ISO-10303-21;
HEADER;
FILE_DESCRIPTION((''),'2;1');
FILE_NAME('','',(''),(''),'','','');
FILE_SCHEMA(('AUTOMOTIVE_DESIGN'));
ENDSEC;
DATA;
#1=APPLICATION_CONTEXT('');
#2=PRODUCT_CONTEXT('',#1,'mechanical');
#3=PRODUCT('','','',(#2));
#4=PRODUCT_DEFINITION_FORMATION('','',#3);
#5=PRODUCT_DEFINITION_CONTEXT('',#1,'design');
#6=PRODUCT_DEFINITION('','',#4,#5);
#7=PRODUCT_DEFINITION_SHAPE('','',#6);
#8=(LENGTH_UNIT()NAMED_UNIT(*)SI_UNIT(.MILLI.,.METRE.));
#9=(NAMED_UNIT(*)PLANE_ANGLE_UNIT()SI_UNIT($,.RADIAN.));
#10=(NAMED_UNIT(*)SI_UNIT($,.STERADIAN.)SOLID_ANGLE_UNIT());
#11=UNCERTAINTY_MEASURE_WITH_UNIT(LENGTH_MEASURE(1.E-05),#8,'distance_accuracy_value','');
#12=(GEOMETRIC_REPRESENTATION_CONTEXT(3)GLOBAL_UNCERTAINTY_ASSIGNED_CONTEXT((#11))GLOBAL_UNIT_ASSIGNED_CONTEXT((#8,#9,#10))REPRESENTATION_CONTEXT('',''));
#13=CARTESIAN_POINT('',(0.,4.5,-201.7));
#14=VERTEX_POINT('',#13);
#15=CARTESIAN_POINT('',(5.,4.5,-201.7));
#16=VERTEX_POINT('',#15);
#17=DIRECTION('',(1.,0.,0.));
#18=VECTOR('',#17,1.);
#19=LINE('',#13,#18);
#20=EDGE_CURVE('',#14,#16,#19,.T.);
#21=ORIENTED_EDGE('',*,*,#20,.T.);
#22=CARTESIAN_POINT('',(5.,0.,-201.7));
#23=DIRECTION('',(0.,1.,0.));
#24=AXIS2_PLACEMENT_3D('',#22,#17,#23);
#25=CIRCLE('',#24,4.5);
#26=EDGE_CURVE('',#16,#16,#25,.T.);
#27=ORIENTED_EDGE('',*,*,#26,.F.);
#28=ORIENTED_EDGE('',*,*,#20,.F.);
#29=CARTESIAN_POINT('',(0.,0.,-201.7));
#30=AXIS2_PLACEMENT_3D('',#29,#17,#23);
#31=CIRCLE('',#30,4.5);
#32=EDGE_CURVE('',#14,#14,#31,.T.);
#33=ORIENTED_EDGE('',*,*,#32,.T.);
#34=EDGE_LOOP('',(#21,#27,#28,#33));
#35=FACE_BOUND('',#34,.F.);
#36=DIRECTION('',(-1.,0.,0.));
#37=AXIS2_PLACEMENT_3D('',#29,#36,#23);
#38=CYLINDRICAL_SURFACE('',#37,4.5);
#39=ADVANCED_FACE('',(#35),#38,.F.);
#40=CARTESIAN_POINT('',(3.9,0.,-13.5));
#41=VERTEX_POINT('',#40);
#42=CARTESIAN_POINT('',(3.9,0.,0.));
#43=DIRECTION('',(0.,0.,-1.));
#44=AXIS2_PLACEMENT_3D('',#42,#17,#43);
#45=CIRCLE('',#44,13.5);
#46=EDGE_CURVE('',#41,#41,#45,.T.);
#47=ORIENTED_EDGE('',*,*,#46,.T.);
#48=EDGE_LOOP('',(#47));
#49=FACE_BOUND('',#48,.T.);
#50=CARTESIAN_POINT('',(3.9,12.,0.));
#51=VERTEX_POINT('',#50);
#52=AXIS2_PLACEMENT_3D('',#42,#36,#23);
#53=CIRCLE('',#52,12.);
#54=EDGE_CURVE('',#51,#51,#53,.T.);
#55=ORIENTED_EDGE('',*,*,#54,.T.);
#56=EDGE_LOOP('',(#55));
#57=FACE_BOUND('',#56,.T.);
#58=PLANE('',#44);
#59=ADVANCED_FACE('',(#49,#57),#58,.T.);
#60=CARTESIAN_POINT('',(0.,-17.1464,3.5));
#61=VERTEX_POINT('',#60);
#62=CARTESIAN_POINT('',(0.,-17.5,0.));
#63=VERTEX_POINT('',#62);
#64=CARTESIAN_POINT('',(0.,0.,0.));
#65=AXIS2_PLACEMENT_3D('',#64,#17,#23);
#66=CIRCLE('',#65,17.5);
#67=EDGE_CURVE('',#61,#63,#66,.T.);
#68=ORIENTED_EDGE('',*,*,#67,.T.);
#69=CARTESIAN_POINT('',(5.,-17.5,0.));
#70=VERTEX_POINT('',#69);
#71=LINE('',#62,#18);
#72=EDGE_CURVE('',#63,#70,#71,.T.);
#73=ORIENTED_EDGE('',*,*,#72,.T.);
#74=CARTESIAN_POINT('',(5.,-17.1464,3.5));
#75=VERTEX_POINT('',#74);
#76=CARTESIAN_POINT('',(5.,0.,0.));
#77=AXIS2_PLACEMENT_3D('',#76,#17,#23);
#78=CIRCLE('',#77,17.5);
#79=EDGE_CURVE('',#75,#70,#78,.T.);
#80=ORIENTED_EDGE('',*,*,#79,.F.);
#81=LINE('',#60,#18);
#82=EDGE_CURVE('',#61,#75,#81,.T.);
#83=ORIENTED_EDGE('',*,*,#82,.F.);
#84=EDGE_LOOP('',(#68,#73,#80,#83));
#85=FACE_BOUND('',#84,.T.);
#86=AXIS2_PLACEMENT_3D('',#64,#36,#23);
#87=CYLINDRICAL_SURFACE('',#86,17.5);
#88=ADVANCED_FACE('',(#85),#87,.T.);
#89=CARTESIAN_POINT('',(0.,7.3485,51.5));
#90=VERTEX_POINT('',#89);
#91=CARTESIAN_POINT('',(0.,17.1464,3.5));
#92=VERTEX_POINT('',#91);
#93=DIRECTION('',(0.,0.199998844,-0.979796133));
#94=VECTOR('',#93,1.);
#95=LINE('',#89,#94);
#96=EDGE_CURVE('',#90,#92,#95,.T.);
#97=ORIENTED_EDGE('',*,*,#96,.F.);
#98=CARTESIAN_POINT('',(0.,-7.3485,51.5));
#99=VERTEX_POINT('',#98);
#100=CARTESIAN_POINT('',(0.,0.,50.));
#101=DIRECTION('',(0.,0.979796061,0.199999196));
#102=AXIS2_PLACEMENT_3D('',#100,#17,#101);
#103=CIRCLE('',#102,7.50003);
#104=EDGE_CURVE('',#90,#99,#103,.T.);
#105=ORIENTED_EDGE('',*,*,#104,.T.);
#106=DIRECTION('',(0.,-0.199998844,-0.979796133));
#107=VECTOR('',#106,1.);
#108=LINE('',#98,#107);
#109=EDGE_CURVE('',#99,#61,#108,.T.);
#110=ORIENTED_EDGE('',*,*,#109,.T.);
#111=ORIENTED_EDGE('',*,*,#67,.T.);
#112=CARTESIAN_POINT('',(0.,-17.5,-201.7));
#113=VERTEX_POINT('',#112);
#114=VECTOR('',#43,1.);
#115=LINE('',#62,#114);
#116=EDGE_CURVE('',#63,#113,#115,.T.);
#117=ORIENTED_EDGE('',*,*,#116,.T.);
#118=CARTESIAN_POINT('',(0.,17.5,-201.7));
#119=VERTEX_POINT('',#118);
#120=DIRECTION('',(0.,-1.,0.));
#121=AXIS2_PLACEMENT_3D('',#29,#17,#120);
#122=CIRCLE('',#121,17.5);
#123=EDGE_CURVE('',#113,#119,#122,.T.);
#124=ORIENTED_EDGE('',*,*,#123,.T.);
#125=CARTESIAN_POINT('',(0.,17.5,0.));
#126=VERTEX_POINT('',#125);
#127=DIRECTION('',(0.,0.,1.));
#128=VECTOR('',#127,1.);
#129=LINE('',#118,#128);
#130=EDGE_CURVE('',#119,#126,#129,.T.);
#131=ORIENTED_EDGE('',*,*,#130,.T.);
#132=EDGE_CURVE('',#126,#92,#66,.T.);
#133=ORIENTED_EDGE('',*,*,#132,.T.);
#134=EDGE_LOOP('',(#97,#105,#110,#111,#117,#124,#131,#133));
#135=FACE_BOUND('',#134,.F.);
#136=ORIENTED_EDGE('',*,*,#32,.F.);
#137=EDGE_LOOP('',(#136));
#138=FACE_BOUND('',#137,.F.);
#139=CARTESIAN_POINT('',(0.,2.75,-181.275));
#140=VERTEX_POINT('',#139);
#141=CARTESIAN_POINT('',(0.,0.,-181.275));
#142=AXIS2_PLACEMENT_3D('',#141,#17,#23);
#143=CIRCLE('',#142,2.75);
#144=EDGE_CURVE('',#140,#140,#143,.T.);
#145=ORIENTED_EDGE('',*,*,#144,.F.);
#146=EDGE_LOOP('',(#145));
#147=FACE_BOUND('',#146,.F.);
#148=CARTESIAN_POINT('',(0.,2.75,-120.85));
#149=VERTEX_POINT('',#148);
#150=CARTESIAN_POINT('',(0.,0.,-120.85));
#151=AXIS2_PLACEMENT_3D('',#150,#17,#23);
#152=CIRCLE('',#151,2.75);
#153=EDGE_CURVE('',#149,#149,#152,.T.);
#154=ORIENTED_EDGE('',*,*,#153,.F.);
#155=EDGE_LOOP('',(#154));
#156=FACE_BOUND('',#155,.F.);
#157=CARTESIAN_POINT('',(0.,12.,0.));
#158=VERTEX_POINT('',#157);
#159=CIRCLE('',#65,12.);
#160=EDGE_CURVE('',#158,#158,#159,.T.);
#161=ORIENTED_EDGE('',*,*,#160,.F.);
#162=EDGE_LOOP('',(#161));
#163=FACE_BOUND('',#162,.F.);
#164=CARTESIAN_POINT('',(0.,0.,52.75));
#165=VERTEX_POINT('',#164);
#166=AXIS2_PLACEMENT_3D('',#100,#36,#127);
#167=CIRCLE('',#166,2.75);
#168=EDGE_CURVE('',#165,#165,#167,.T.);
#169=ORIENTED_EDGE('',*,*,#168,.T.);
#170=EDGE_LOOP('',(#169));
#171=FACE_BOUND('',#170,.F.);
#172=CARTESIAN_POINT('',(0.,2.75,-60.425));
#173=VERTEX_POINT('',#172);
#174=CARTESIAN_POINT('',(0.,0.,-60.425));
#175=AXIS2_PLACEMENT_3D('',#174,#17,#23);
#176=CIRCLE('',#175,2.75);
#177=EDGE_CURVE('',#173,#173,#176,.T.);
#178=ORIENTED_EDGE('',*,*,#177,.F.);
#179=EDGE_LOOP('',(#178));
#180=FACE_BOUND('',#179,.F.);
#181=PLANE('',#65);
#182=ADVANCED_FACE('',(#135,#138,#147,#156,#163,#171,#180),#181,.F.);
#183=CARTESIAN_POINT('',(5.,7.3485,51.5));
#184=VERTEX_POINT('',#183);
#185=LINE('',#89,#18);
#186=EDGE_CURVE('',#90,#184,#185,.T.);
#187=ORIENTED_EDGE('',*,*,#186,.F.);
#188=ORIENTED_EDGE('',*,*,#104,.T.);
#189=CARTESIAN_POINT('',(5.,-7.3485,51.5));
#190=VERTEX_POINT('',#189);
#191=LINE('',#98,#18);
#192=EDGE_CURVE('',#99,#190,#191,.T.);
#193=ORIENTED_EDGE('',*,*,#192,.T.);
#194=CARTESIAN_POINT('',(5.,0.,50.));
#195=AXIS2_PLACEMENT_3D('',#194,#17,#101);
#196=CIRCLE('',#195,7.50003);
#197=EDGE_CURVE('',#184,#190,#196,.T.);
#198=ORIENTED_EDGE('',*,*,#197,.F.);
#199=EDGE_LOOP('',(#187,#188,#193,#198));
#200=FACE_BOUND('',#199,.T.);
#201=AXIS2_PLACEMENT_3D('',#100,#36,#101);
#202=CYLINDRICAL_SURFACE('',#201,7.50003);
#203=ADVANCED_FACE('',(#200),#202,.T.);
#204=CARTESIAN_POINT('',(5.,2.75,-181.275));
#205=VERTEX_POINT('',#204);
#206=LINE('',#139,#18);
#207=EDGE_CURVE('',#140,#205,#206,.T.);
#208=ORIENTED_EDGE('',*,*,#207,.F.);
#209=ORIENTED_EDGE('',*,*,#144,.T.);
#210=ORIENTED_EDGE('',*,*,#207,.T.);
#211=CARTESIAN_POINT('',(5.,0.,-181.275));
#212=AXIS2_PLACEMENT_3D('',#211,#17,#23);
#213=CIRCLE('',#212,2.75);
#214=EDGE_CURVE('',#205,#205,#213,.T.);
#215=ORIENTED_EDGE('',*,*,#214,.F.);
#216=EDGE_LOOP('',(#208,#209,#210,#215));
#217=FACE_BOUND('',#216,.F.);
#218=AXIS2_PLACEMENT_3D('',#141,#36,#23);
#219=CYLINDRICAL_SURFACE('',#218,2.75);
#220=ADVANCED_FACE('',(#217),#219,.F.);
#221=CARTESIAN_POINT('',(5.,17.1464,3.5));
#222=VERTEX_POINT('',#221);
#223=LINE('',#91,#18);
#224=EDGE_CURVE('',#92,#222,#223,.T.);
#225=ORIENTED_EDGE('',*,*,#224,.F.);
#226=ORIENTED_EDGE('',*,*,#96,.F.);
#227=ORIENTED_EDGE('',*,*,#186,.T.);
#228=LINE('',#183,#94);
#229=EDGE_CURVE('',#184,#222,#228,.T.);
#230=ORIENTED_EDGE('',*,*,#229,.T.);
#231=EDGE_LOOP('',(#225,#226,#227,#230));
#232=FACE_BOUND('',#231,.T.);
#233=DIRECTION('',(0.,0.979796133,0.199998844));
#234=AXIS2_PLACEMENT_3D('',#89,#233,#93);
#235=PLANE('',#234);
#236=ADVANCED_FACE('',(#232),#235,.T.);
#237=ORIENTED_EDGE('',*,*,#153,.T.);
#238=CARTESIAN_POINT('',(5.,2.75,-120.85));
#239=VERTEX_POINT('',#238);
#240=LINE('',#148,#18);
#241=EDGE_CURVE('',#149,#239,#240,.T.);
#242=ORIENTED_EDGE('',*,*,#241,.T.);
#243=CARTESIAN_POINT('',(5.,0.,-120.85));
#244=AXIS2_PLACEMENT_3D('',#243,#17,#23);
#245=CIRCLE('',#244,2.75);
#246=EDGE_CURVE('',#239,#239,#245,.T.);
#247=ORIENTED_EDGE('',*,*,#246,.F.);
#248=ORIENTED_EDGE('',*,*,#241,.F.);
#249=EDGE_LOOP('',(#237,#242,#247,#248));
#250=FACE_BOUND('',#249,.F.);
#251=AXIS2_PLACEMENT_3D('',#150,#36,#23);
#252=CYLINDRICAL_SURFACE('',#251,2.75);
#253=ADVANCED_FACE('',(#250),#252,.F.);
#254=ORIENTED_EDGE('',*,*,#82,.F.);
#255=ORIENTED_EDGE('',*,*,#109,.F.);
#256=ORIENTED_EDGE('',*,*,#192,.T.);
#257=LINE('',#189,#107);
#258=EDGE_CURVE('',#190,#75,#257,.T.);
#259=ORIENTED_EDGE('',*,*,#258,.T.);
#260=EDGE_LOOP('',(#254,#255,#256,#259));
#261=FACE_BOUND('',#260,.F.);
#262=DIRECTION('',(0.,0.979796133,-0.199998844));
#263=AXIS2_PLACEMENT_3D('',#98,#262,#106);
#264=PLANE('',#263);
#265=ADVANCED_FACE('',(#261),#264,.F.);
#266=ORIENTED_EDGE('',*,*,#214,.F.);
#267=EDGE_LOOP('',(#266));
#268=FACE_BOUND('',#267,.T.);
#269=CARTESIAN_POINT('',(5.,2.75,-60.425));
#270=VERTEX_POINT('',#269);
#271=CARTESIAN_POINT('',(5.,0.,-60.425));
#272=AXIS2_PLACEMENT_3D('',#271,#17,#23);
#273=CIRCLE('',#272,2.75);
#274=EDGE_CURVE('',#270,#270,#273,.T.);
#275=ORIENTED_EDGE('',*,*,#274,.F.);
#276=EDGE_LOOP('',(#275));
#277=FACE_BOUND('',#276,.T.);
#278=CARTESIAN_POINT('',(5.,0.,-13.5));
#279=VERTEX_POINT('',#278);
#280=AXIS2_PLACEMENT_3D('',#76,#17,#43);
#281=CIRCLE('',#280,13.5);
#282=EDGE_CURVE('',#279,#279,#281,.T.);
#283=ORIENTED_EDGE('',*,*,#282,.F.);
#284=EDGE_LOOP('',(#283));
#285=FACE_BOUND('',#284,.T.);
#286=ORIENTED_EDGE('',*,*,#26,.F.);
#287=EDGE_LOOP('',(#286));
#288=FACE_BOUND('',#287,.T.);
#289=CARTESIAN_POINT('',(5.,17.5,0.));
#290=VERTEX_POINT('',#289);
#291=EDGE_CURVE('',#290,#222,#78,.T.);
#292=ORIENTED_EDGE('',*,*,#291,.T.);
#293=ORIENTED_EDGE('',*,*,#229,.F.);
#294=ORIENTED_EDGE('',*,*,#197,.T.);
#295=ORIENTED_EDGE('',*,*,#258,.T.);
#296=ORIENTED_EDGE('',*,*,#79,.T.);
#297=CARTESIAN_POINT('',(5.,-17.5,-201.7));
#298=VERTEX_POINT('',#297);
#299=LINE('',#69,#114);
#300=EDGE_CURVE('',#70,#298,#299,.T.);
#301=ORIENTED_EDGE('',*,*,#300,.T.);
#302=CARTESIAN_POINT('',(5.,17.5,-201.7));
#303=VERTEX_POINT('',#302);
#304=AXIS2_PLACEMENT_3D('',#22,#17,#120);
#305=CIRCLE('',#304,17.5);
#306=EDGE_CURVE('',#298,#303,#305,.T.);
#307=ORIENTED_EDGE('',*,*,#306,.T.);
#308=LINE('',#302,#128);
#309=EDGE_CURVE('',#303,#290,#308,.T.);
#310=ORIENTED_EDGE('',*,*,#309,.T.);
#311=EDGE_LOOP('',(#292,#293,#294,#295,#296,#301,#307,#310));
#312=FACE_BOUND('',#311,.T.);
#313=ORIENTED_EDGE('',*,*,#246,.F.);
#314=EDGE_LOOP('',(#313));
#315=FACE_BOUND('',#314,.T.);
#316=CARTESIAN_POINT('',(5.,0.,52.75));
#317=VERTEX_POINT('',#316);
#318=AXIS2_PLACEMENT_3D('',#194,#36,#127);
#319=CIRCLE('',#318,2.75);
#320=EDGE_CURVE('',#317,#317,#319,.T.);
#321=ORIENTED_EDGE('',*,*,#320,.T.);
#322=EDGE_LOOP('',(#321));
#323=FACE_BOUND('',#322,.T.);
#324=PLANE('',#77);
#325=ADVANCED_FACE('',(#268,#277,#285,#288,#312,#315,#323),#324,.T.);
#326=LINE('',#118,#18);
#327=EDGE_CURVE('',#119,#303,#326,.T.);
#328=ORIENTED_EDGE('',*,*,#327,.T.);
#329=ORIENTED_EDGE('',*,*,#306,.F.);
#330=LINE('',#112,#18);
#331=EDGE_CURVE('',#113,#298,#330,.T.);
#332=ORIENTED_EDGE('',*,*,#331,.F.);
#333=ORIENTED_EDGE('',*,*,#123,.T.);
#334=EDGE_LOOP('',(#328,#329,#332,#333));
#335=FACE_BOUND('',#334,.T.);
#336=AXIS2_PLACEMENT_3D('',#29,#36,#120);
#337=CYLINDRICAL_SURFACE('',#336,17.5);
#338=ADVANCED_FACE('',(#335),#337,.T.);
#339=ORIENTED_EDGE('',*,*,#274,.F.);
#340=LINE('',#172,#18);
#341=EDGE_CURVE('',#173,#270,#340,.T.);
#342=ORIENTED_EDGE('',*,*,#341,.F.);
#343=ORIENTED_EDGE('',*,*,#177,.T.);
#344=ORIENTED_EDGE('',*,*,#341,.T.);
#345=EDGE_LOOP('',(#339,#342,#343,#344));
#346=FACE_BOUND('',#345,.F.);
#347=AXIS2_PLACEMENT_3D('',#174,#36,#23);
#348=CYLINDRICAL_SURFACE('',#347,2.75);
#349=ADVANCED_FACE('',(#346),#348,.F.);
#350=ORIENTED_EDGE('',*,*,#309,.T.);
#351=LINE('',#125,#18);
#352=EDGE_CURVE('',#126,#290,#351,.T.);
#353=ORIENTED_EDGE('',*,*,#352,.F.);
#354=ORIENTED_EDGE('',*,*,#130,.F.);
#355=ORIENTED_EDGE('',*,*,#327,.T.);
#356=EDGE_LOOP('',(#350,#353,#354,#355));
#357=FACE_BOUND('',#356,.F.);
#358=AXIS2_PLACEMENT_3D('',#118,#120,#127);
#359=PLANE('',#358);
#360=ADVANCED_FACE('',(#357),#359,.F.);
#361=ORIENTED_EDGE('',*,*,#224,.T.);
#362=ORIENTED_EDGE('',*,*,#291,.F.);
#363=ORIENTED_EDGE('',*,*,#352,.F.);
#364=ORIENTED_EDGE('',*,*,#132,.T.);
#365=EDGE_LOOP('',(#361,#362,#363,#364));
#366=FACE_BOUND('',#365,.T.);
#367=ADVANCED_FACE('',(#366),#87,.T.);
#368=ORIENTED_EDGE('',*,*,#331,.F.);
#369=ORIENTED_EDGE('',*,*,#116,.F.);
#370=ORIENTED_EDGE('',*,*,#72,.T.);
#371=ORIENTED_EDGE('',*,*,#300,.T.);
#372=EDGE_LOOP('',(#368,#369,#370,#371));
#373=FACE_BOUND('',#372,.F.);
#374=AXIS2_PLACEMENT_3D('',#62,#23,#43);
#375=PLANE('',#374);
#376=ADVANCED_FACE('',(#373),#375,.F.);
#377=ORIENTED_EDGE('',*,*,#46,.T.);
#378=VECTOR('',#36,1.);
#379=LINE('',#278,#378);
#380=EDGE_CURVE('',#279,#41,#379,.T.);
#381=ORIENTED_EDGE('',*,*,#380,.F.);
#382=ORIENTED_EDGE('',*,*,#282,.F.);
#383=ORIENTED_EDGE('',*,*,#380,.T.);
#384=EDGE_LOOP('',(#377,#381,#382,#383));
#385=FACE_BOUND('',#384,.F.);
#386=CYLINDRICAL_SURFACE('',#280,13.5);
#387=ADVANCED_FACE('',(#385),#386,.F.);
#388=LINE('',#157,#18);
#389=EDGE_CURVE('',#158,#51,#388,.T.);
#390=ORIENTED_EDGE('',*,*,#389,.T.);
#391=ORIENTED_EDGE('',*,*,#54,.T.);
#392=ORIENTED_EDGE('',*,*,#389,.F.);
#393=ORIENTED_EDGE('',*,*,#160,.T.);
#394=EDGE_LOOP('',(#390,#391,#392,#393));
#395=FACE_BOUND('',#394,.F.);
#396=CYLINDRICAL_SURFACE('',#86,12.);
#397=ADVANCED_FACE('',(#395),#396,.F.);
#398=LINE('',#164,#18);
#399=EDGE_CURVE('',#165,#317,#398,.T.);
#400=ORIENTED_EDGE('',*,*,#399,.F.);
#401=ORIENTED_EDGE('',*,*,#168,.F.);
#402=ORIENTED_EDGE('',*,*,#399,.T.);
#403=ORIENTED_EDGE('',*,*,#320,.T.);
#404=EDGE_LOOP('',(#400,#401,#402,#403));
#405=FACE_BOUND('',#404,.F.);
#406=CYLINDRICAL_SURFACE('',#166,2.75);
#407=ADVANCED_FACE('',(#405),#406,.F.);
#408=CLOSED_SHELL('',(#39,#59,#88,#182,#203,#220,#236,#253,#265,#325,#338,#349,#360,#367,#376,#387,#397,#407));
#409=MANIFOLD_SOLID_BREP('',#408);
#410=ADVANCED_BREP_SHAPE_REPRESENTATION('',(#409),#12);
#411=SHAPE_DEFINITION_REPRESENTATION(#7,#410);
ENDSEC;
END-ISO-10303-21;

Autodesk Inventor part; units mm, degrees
ref_plane "YZ Plane" through (0, 0, 0) normal (1, 0, 0) x (0, 1, 0)
ref_plane "XZ Plane" through (0, 0, 0) normal (0, 1, 0) x (-1, 0, 0)
ref_plane "XY Plane" through (0, 0, 0) normal (0, 0, 1) x (1, 0, 0)
sketch "Sketch1" plane through (0, 0, 0) normal (1, 0, 0) x (0, 1, 0)
  circle A0 centre (0, 0) radius 12
  circle A1 centre (0, 0) radius 17.5
  line L0 (0, 0) -> (0, -201.7) construction
  line L1 (-17.5, 0) -> (-17.5, -201.7)
  line L2 (17.5, -201.7) -> (17.5, 0)
  arc A2 (17.5, 0) -> (-17.5, 0) centre (0, 0) ccw
  arc A3 (-17.5, -201.7) -> (17.5, -201.7) centre (0, -201.7) ccw
  line L3 (0, 0) -> (201.7, 0) construction
  circle A4 centre (0, -60.425) radius 2.75
  circle A5 centre (0, -120.85) radius 2.75
  circle A6 centre (0, -181.275) radius 2.75
  circle A7 centre (0, -201.7) radius 4.5
  circle A8 centre (0, 50) radius 2.75
  arc A9 (7.3485, 51.5) -> (-7.3485, 51.5) centre (0, 50) ccw
  line L4 (7.3485, 51.5) -> (17.1464, 3.5)
  line L5 (-7.3485, 51.5) -> (-17.1464, 3.5)
  arc A10 (17.1464, 3.5) -> (-17.1464, 3.5) centre (0, 0) ccw
  point P0 (0, -100.85)
  dimension "d0" = 24
  dimension "d1" = 35
  dimension "d7" = 201.7
  dimension "d8" = 90
  dimension "d9" = 35
  dimension "d13" = 5.5
  dimension "d14" = 60.425
  dimension "d15" = 17.5
  dimension "d18" = 60.425
  dimension "d23" = 9
  dimension "d24" = 5.5
  dimension "d25" = 17.5
  dimension "d26" = 50
  dimension "d27" = 15
extrude "Extrusion1" add sketch "Sketch1" along normal blind 5 contours A1 | L2 A3 L1 A1 | A1 L5 A9 L4 | A8
sketch "Sketch2" plane through (5, 0, 0) normal (1, 0, 0) x (0, 0, -1)
  circle A0 centre (0, 0) radius 13.5
  dimension "d4" = 27
extrude "Extrusion2" cut sketch "Sketch2" against normal blind 1.1
sketch "Sketch4" plane through (0, 0, 0) normal (-1, 0, 0) x (0, 0, 1)
  circle A0 centre (50, 0) radius 2.75
  arc A1 (51.5, -7.3485) -> (51.5, 7.3485) centre (50, 0) ccw projected
  point P0 (0, 0)
  dimension "d28" = 5.5
extrude "Extrusion4" cut sketch "Sketch4" against normal blind 10
properties part number "Bearing Holder" material "Aluminum 6061"
